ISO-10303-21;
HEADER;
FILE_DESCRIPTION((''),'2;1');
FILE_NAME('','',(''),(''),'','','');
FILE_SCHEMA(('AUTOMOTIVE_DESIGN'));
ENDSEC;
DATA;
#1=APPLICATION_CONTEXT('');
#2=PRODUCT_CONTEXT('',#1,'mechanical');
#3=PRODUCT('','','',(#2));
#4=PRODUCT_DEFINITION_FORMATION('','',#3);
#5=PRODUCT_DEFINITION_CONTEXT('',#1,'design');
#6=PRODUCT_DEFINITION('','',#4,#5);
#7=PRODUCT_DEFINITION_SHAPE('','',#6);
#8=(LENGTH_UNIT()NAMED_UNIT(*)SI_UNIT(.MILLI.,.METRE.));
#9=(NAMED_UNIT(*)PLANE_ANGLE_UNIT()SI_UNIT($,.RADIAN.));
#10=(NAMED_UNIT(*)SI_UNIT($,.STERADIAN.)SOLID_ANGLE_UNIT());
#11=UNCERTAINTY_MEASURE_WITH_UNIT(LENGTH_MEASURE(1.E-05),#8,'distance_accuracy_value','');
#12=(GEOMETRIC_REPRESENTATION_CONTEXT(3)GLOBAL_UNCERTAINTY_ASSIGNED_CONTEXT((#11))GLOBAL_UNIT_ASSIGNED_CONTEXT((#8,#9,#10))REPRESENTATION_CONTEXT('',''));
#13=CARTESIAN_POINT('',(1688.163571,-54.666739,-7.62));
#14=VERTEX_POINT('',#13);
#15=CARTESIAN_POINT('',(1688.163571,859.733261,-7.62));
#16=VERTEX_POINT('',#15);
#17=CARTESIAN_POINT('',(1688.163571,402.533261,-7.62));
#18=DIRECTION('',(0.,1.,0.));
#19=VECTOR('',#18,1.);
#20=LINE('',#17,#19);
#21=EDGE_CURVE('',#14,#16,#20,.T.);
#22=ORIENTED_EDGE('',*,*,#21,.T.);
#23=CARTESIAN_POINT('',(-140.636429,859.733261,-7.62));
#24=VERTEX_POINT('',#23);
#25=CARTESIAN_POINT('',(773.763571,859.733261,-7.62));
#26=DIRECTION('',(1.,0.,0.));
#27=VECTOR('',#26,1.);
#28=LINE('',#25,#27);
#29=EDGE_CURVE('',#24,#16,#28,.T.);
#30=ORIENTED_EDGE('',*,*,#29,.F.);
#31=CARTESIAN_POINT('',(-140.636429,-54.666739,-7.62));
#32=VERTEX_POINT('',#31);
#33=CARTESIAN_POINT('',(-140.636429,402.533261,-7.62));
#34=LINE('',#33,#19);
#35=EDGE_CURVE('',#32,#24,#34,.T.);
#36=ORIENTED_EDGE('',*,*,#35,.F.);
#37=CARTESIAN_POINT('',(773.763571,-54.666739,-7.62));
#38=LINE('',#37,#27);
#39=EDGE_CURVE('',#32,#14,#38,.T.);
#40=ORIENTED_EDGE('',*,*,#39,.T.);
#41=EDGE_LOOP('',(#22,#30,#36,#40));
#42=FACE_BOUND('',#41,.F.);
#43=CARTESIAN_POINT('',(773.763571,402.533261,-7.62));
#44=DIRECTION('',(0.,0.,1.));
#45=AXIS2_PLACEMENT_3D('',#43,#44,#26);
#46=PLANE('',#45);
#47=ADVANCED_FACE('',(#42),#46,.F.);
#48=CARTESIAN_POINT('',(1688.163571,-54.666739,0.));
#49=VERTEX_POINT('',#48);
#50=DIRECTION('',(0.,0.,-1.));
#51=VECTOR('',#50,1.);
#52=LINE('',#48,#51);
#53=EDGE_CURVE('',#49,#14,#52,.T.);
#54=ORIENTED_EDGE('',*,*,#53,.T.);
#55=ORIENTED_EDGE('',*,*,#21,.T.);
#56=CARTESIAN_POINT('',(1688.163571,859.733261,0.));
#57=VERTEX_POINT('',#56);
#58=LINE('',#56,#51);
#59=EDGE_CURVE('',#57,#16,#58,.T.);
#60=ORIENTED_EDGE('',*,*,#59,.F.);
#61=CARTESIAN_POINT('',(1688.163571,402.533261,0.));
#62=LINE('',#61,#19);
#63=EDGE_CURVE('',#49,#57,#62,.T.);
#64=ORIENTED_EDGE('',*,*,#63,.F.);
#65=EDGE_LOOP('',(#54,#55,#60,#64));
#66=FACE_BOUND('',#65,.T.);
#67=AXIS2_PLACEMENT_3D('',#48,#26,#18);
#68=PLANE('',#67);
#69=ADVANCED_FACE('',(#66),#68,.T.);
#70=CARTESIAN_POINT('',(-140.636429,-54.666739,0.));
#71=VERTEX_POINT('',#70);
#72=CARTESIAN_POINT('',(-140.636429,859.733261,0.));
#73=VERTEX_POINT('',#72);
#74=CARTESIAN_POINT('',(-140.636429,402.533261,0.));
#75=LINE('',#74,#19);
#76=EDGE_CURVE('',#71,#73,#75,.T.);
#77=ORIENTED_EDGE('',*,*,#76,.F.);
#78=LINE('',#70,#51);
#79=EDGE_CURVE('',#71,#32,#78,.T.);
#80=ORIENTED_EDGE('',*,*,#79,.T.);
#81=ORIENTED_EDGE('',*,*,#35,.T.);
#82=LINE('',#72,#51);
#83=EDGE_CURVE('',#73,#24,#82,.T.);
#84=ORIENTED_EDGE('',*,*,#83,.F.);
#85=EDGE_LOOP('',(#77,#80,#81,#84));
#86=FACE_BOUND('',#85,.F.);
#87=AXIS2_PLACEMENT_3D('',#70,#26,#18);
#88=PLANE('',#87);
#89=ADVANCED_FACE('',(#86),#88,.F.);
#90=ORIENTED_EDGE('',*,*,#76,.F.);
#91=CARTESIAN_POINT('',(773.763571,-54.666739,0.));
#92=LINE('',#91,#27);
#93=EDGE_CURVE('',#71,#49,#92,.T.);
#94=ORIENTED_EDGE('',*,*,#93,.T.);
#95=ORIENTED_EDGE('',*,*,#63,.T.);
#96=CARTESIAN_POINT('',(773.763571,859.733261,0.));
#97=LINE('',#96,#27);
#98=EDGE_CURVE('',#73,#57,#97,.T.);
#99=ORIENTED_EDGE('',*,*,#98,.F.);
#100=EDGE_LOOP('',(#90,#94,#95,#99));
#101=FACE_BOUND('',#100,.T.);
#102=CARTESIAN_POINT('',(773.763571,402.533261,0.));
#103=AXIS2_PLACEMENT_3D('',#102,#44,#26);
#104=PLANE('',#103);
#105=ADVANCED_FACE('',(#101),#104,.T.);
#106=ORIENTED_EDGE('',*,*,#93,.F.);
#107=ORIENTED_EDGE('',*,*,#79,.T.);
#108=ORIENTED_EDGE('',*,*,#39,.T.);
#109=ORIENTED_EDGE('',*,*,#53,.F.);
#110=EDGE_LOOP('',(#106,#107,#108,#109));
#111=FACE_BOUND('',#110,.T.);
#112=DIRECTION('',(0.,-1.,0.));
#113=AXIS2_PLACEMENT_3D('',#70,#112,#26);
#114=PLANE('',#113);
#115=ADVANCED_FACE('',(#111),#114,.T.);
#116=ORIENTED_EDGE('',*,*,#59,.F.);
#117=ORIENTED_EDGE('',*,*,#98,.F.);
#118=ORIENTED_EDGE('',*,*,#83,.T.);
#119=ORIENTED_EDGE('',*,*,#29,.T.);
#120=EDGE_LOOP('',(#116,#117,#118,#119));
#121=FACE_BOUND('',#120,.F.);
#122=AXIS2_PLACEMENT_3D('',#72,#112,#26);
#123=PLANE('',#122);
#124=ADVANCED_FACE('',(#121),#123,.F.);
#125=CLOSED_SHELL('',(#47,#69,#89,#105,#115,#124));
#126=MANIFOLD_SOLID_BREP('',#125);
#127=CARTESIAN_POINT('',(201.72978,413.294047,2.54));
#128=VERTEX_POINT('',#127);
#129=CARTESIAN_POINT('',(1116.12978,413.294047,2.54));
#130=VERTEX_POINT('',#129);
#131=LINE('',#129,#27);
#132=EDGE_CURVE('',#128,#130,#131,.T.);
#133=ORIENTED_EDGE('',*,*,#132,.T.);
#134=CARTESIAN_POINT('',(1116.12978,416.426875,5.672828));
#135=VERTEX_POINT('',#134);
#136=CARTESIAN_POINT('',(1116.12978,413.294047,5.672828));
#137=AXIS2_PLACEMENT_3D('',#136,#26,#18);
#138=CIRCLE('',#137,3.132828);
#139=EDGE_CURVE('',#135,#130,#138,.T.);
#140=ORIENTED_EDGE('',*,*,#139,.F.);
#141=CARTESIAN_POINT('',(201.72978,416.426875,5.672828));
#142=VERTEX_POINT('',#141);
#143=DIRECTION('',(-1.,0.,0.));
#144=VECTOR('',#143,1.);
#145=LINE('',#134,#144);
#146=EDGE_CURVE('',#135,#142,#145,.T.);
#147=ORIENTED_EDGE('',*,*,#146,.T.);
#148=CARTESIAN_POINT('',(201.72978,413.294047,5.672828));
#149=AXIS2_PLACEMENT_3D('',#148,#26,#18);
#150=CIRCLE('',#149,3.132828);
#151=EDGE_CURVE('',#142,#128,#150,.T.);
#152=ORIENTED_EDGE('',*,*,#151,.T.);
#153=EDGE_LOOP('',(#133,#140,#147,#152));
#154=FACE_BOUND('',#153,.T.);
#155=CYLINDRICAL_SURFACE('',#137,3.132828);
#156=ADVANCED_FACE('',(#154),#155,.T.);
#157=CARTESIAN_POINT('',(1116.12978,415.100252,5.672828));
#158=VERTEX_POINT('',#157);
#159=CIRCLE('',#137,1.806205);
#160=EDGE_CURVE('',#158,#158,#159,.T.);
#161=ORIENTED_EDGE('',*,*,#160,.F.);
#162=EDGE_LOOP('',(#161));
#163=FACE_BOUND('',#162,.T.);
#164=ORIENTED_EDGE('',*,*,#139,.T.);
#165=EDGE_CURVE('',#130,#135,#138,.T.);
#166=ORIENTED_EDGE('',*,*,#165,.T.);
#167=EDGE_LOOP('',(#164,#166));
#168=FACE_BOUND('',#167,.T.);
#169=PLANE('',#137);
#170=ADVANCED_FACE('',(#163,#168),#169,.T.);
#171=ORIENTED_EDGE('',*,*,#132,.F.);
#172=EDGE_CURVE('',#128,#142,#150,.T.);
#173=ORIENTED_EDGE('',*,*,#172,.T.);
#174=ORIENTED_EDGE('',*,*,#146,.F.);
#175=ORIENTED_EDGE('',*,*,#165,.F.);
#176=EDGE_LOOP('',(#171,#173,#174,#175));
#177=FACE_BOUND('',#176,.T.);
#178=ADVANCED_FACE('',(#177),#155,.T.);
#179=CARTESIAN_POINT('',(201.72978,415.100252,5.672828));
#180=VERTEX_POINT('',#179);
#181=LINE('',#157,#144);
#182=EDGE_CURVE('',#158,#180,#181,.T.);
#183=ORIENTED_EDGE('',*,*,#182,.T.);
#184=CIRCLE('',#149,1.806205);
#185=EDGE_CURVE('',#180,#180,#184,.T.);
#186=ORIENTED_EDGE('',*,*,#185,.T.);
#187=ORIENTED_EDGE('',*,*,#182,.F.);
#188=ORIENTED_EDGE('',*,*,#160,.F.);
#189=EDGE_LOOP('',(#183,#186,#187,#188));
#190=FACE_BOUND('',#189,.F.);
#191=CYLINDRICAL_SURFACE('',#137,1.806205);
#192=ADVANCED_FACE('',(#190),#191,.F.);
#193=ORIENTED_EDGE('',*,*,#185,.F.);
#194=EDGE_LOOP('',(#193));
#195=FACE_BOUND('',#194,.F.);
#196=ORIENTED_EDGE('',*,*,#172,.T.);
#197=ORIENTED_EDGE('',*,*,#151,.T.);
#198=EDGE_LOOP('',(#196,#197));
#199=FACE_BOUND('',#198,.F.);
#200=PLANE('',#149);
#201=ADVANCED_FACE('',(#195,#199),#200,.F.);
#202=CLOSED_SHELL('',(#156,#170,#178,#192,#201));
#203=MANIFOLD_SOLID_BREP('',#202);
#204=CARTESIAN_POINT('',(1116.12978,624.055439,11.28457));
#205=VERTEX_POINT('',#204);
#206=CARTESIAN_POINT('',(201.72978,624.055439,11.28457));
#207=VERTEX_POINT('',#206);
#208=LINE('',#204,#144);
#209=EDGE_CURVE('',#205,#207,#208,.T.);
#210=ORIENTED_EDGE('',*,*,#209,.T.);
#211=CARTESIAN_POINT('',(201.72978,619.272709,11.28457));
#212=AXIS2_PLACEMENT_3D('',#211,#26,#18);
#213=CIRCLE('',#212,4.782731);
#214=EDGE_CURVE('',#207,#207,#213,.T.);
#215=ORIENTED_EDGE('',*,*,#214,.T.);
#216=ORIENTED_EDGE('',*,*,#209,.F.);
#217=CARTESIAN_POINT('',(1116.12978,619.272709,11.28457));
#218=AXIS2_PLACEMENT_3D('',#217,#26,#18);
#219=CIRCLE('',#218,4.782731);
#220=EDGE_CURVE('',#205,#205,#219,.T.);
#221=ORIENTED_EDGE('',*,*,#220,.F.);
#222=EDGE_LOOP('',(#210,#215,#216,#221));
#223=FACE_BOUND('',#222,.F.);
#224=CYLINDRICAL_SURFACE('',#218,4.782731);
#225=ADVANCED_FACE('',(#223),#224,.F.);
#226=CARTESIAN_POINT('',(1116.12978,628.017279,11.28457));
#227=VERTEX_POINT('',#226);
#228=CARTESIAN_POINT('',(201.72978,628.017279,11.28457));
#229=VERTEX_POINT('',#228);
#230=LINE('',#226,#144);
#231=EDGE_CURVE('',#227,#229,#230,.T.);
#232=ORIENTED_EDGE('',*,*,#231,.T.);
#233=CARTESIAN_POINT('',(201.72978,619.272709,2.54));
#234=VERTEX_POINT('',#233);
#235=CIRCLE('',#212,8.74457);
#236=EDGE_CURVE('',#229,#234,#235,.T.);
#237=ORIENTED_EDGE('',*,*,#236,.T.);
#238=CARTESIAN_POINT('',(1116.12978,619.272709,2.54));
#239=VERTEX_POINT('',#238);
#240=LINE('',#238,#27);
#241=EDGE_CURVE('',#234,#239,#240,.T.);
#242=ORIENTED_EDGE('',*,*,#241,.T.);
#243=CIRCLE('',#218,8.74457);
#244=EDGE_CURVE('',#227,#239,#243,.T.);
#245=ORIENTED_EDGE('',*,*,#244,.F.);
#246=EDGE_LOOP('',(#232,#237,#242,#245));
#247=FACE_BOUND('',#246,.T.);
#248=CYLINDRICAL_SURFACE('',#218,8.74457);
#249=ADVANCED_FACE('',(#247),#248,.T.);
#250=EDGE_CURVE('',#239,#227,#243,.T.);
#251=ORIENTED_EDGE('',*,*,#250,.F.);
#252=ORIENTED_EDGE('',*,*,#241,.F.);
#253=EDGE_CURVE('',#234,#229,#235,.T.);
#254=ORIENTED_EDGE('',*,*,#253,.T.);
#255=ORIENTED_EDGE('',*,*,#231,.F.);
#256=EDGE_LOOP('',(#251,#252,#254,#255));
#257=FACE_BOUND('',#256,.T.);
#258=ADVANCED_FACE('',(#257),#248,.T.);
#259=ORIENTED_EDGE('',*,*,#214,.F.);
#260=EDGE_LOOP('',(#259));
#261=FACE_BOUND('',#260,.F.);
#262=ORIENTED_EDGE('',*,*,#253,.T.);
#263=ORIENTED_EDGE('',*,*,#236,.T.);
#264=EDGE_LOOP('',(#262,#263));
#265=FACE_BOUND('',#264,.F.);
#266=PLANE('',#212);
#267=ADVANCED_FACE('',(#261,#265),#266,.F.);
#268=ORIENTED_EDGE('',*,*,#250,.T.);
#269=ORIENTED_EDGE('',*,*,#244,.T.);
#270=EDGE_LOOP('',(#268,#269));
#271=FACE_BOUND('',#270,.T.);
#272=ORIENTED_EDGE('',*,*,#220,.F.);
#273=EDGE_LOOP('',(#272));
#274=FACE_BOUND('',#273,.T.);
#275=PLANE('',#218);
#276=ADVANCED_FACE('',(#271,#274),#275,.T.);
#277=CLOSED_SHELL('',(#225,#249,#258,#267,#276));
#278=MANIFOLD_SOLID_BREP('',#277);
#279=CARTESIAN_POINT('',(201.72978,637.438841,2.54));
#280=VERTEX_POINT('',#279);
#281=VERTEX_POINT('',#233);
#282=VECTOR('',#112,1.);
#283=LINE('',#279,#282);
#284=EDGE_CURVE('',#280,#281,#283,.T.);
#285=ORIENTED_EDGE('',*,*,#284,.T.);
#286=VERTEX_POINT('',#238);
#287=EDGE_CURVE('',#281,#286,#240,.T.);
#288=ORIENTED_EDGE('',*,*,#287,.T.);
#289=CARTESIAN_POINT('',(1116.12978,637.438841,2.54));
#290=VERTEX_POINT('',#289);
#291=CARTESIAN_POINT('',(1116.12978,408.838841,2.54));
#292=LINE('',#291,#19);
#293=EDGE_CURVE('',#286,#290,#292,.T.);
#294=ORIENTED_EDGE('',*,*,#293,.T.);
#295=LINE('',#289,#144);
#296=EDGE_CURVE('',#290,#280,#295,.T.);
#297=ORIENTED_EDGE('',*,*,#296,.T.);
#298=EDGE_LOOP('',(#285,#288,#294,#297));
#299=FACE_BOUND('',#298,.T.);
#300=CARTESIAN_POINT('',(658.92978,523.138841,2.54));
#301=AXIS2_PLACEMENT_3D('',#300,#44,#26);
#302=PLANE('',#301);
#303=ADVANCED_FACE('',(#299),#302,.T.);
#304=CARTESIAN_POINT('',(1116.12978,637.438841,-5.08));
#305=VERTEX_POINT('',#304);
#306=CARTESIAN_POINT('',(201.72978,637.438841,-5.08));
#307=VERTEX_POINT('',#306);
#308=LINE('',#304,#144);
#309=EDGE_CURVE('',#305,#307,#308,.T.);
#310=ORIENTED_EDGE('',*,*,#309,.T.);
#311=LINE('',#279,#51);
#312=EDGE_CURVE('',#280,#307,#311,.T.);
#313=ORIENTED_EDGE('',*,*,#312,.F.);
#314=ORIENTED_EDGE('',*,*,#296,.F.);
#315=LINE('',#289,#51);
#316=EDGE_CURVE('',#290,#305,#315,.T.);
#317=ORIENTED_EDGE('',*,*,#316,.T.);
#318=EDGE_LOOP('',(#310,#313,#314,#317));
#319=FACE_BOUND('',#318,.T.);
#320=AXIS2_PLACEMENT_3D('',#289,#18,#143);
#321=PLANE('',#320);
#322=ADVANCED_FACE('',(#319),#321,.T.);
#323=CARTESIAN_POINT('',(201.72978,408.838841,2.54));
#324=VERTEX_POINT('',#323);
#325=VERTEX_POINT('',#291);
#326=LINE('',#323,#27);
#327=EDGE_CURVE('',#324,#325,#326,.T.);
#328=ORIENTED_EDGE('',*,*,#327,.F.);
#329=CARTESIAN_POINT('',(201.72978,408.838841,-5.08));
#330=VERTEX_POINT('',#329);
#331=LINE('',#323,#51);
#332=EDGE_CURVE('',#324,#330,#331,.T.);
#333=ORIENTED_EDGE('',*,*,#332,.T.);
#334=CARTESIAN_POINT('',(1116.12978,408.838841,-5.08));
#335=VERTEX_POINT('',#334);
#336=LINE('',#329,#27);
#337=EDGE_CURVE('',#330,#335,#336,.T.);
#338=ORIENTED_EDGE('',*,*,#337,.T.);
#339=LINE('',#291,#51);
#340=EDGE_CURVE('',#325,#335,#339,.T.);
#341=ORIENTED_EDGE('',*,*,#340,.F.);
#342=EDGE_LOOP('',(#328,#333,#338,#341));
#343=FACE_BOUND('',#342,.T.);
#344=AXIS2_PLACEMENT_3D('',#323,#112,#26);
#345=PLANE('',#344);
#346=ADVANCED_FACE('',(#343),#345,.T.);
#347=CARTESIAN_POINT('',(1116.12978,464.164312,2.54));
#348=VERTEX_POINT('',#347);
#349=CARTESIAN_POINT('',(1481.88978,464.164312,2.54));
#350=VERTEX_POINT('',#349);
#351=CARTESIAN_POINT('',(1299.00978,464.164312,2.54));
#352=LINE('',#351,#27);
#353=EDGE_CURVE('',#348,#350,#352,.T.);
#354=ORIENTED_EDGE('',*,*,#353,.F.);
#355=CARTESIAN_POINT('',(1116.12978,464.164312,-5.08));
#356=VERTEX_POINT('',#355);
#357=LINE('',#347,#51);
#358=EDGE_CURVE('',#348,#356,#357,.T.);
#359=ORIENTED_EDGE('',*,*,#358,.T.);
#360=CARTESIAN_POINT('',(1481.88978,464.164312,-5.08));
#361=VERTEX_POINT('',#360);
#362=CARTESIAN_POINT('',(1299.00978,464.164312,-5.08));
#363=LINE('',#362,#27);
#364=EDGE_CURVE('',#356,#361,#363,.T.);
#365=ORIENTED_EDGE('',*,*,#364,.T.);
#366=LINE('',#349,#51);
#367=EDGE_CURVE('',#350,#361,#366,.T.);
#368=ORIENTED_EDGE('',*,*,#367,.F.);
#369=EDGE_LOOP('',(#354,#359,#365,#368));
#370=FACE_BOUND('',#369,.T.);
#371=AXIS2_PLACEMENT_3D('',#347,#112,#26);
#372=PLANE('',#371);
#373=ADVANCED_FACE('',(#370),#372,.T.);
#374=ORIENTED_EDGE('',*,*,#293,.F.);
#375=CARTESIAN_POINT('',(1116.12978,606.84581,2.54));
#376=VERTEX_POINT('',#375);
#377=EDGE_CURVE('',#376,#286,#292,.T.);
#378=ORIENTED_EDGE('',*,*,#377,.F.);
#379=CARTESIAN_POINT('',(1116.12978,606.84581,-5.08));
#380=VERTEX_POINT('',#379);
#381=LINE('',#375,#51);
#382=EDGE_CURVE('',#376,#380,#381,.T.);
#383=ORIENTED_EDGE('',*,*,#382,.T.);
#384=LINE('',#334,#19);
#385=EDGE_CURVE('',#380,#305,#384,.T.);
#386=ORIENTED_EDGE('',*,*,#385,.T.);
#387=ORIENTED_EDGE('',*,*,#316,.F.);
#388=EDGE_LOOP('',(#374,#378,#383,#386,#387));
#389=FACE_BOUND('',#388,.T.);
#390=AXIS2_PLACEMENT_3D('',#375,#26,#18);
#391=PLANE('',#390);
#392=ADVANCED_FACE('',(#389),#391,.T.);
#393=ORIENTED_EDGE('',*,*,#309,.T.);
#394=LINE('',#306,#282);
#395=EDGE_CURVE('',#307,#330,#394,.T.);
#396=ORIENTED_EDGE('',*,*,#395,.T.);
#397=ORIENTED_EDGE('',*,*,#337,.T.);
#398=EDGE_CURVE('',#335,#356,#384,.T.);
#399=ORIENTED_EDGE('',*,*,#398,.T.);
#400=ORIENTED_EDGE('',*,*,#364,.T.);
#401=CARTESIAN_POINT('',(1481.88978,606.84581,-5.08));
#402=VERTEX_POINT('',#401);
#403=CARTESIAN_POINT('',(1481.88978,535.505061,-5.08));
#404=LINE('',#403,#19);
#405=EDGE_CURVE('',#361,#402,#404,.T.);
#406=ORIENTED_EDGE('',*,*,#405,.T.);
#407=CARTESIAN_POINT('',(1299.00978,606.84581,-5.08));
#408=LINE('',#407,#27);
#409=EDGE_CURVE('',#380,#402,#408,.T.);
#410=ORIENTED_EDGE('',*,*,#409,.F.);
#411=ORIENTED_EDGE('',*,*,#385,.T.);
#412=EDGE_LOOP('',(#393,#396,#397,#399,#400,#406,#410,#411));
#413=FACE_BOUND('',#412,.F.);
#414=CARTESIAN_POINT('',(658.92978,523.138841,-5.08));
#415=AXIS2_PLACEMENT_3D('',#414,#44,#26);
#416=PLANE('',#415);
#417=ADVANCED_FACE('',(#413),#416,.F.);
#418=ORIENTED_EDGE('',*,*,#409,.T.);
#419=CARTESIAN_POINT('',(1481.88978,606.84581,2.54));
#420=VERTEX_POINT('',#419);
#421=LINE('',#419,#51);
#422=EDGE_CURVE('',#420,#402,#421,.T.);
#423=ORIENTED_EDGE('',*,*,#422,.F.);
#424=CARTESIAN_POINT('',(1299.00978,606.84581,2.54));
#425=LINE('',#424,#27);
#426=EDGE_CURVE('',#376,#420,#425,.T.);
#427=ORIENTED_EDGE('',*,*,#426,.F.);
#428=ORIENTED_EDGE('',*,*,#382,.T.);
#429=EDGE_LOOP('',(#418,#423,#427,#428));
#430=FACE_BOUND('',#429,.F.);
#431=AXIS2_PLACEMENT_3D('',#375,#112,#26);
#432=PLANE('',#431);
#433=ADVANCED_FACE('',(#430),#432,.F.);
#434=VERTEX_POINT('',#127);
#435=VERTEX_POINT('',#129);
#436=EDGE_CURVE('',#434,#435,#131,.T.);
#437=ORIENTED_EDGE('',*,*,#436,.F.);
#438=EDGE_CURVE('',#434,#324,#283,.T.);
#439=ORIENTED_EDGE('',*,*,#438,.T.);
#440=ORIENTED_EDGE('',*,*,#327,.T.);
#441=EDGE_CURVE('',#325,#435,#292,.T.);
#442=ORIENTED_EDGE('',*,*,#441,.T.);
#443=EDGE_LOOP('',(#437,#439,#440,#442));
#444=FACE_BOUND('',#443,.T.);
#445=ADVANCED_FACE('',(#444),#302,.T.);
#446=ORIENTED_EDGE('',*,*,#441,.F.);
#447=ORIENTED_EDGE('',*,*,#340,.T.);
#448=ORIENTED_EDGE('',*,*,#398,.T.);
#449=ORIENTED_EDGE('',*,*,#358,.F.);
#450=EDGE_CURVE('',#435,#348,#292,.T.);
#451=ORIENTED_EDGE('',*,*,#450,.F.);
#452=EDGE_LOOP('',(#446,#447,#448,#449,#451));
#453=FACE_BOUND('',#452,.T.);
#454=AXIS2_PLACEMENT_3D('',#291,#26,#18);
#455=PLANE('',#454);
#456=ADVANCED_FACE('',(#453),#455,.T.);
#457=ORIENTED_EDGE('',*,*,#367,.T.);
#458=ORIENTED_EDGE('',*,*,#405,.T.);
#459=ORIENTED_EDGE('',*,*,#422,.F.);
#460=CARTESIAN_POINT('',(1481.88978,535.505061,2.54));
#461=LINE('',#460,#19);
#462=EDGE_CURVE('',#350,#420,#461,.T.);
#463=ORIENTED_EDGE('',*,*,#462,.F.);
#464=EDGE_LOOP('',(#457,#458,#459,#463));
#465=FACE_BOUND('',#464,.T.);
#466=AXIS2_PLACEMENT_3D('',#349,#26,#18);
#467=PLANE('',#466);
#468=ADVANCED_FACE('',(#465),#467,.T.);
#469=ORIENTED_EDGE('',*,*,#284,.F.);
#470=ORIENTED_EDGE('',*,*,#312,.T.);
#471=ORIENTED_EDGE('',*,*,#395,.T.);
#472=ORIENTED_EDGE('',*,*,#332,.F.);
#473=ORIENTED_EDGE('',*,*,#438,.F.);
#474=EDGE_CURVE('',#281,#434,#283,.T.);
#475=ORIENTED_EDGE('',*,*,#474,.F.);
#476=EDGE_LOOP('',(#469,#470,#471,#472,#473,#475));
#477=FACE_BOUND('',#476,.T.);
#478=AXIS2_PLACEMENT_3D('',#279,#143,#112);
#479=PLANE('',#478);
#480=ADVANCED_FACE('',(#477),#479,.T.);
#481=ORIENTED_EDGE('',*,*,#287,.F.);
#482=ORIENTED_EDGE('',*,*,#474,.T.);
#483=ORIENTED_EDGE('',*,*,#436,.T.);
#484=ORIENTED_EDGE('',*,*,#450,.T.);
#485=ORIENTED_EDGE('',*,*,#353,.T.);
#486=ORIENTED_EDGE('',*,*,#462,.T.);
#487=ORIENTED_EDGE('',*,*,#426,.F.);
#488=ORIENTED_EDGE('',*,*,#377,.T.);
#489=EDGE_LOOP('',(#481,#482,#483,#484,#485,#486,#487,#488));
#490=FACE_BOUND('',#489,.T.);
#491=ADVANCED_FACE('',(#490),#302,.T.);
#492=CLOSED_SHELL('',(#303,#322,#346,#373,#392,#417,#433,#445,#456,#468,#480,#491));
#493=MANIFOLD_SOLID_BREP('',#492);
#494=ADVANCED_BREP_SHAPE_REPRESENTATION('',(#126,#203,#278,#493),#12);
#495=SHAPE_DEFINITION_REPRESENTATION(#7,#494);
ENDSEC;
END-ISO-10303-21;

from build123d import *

# Parameters (mm, degrees)
F0_W      = 1828.8
F0_H      = 914.4
F2_DEPTH  = 7.62
F3_W      = 365.76
F3_H      = 142.6814980805
F4_DEPTH  = 7.62
F7_R      = 3.1328282943
F7_R_2    = 1.8062049827
F8_DEPTH  = 914.4
F10_R     = 8.7445702097
F10_R_2   = 4.7827305273
F11_DEPTH = 914.4


# Not quite as in the source:
# - the program builds the solid bodies; features that only make, move or delete a surface that nothing else refers to are left out


with BuildPart() as f2:
    # F0 (on Top) → F2 (new body)
    with BuildSketch(Plane.XY):
        with Locations((773.7635708094, 402.5332610428)):
            Rectangle(F0_W, F0_H)
    extrude(amount=-F2_DEPTH)


with BuildPart() as f4:
    # F3 (on Top) → F4 (new body)
    with BuildSketch(Plane.XY):
        Polygon((87.4297803879, 78.6388413668), (-826.9702196121, 78.6388413668), (-826.9702196121, -149.9611586332), (87.4297803879, -149.9611586332), (87.4297803879, -94.6356877685), (87.4297803879, 48.045810312), align=None)
        with Locations((270.3097803879, -23.2949387282)):
            Rectangle(F3_W, F3_H)
    extrude(amount=-F4_DEPTH)


with BuildPart() as f4_1:
    # F5: moved
    add(f4.part.moved(Location((1028.7, 558.8, 2.54))))

    # F7 (on offset) → F8 (join, through all)
    with BuildSketch(Plane.YZ.offset(1116.1297803879)):
        with Locations((413.2940471172, 5.6728282943)):
            Circle(F7_R)
        with Locations((413.2940471172, 5.6728282943)):
            Circle(F7_R_2, mode=Mode.SUBTRACT)
    extrude(amount=-F8_DEPTH)

    # F10 (on offset) → F11 (join, through all)
    with BuildSketch(Plane.YZ.offset(1116.1297803879)):
        with Locations((619.2727088928, 11.2845702097)):
            Circle(F10_R)
        with Locations((619.2727088928, 11.2845702097)):
            Circle(F10_R_2, mode=Mode.SUBTRACT)
    extrude(amount=-F11_DEPTH)


solid = Compound([f2.part, f4_1.part])
